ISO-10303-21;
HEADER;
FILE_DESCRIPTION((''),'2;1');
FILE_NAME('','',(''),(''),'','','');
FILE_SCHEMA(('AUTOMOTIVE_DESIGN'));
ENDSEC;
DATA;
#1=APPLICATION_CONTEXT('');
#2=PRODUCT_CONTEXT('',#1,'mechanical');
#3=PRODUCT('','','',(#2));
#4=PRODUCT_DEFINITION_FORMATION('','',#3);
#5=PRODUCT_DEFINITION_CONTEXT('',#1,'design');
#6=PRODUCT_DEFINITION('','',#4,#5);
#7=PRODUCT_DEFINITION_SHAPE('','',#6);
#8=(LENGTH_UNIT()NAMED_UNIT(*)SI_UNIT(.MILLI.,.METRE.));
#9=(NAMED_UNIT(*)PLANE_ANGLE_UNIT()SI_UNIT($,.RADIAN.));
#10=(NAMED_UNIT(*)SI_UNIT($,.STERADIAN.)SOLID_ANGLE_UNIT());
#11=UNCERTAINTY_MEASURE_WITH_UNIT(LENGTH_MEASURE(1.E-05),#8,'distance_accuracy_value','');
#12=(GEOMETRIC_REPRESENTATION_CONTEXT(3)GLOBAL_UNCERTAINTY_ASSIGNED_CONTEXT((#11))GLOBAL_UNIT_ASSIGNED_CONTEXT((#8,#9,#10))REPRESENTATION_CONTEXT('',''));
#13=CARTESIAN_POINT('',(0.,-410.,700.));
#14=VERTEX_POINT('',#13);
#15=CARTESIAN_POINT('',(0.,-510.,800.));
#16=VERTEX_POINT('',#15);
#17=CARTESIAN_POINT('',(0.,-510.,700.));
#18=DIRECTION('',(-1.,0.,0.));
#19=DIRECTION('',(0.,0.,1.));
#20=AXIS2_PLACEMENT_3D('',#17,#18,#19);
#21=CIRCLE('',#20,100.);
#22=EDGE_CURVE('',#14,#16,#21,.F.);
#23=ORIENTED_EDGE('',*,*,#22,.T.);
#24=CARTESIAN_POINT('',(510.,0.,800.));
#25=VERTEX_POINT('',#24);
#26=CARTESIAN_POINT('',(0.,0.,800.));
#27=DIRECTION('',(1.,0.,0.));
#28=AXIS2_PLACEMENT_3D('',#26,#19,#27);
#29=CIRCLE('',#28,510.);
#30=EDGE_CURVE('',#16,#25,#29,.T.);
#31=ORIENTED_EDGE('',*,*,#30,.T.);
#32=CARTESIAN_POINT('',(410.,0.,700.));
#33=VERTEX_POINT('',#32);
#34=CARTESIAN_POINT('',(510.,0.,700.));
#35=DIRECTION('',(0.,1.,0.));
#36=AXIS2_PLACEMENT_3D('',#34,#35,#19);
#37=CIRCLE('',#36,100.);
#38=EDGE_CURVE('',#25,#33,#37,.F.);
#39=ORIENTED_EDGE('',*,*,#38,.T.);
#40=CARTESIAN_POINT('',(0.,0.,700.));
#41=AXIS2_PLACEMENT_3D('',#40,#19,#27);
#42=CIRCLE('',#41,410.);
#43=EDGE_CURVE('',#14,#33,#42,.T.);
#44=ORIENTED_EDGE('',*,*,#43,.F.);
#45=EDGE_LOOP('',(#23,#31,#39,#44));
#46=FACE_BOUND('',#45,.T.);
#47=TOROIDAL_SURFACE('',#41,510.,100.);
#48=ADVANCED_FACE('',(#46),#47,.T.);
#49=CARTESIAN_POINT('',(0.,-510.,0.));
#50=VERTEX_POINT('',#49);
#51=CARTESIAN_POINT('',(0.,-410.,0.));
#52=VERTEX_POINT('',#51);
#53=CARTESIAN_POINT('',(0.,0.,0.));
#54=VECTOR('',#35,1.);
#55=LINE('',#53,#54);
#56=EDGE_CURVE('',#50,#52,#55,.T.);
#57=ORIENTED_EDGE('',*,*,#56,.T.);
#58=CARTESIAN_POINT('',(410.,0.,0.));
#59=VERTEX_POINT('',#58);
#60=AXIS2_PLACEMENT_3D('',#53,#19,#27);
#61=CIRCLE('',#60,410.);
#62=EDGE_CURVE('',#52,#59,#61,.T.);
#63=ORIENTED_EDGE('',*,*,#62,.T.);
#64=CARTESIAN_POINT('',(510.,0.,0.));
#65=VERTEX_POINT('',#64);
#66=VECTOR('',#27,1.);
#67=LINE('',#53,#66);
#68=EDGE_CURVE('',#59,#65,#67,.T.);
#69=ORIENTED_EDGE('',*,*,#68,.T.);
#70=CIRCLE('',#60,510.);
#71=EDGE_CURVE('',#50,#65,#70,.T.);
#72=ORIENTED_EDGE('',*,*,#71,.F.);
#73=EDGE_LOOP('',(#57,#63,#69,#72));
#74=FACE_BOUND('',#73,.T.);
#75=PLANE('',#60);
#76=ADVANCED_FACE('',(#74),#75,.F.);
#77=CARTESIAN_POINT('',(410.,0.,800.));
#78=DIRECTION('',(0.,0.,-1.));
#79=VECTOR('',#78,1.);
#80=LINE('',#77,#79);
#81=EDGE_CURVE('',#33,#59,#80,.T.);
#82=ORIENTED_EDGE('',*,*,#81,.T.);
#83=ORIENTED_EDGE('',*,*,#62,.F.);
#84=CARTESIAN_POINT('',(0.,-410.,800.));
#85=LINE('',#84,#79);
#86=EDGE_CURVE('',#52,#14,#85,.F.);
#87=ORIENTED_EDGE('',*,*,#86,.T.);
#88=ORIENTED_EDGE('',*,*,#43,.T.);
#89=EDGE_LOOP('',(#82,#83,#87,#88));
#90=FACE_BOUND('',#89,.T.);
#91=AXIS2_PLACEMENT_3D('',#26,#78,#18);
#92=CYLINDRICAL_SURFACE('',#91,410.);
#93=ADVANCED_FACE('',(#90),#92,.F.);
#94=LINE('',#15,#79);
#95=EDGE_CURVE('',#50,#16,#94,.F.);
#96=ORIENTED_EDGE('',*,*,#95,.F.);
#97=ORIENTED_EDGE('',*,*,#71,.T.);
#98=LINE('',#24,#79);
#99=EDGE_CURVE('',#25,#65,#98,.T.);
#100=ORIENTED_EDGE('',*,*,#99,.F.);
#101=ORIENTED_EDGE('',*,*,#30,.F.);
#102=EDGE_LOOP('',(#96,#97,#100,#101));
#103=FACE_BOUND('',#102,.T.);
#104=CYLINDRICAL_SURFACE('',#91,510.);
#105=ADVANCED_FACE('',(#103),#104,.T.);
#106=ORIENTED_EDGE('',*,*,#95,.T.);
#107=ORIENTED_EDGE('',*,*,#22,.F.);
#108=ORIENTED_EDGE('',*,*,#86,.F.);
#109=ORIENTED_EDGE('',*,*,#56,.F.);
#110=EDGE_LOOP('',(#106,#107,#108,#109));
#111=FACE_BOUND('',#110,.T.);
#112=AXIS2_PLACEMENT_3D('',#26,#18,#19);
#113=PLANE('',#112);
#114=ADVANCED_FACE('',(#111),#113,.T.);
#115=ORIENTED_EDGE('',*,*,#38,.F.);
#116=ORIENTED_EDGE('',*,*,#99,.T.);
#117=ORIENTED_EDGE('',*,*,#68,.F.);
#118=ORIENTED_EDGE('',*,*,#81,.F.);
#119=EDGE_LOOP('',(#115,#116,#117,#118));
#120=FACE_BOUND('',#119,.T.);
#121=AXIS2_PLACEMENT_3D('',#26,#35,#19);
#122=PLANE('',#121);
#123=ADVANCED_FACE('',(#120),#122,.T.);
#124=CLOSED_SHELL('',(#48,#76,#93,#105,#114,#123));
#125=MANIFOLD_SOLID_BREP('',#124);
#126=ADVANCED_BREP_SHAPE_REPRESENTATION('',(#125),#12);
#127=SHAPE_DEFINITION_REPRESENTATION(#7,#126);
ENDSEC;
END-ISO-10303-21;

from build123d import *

# Parameters (mm, degrees)
SKETCH_1_R          = 510
SKETCH_1_R_2        = 410
EXTRUDE_1_DEPTH     = 800
FILLET_1_R          = 100
CUT_EXTRUDE_2_DEPTH = 800


with BuildPart() as part:
    # 草图1 → 凸台-拉伸1 (new body)
    with BuildSketch(Plane.XY):
        Circle(SKETCH_1_R)
        Circle(SKETCH_1_R_2, mode=Mode.SUBTRACT)
    extrude(amount=EXTRUDE_1_DEPTH)

    # 圆角1
    fillet_1_edges = [part.edges().sort_by_distance(p)[0] for p in [
        (-410, 0, 800),
    ]]
    fillet(fillet_1_edges, radius=FILLET_1_R - 0.0001)  # a hair under: the kernel refuses the full size

    # 草图2 → 切除-拉伸2 (cut)
    with BuildSketch(Plane.XY):
        Polygon((0, 764.183670641), (-976.361078065, 764.183670641), (-976.361078065, 0), (-976.361078065, -891.83511901), (0, -891.83511901), (0, 0), (1031.561704387, 0), (1031.561704387, 764.183670641), align=None)
    extrude(amount=CUT_EXTRUDE_2_DEPTH, mode=Mode.SUBTRACT)


solid = part.part
